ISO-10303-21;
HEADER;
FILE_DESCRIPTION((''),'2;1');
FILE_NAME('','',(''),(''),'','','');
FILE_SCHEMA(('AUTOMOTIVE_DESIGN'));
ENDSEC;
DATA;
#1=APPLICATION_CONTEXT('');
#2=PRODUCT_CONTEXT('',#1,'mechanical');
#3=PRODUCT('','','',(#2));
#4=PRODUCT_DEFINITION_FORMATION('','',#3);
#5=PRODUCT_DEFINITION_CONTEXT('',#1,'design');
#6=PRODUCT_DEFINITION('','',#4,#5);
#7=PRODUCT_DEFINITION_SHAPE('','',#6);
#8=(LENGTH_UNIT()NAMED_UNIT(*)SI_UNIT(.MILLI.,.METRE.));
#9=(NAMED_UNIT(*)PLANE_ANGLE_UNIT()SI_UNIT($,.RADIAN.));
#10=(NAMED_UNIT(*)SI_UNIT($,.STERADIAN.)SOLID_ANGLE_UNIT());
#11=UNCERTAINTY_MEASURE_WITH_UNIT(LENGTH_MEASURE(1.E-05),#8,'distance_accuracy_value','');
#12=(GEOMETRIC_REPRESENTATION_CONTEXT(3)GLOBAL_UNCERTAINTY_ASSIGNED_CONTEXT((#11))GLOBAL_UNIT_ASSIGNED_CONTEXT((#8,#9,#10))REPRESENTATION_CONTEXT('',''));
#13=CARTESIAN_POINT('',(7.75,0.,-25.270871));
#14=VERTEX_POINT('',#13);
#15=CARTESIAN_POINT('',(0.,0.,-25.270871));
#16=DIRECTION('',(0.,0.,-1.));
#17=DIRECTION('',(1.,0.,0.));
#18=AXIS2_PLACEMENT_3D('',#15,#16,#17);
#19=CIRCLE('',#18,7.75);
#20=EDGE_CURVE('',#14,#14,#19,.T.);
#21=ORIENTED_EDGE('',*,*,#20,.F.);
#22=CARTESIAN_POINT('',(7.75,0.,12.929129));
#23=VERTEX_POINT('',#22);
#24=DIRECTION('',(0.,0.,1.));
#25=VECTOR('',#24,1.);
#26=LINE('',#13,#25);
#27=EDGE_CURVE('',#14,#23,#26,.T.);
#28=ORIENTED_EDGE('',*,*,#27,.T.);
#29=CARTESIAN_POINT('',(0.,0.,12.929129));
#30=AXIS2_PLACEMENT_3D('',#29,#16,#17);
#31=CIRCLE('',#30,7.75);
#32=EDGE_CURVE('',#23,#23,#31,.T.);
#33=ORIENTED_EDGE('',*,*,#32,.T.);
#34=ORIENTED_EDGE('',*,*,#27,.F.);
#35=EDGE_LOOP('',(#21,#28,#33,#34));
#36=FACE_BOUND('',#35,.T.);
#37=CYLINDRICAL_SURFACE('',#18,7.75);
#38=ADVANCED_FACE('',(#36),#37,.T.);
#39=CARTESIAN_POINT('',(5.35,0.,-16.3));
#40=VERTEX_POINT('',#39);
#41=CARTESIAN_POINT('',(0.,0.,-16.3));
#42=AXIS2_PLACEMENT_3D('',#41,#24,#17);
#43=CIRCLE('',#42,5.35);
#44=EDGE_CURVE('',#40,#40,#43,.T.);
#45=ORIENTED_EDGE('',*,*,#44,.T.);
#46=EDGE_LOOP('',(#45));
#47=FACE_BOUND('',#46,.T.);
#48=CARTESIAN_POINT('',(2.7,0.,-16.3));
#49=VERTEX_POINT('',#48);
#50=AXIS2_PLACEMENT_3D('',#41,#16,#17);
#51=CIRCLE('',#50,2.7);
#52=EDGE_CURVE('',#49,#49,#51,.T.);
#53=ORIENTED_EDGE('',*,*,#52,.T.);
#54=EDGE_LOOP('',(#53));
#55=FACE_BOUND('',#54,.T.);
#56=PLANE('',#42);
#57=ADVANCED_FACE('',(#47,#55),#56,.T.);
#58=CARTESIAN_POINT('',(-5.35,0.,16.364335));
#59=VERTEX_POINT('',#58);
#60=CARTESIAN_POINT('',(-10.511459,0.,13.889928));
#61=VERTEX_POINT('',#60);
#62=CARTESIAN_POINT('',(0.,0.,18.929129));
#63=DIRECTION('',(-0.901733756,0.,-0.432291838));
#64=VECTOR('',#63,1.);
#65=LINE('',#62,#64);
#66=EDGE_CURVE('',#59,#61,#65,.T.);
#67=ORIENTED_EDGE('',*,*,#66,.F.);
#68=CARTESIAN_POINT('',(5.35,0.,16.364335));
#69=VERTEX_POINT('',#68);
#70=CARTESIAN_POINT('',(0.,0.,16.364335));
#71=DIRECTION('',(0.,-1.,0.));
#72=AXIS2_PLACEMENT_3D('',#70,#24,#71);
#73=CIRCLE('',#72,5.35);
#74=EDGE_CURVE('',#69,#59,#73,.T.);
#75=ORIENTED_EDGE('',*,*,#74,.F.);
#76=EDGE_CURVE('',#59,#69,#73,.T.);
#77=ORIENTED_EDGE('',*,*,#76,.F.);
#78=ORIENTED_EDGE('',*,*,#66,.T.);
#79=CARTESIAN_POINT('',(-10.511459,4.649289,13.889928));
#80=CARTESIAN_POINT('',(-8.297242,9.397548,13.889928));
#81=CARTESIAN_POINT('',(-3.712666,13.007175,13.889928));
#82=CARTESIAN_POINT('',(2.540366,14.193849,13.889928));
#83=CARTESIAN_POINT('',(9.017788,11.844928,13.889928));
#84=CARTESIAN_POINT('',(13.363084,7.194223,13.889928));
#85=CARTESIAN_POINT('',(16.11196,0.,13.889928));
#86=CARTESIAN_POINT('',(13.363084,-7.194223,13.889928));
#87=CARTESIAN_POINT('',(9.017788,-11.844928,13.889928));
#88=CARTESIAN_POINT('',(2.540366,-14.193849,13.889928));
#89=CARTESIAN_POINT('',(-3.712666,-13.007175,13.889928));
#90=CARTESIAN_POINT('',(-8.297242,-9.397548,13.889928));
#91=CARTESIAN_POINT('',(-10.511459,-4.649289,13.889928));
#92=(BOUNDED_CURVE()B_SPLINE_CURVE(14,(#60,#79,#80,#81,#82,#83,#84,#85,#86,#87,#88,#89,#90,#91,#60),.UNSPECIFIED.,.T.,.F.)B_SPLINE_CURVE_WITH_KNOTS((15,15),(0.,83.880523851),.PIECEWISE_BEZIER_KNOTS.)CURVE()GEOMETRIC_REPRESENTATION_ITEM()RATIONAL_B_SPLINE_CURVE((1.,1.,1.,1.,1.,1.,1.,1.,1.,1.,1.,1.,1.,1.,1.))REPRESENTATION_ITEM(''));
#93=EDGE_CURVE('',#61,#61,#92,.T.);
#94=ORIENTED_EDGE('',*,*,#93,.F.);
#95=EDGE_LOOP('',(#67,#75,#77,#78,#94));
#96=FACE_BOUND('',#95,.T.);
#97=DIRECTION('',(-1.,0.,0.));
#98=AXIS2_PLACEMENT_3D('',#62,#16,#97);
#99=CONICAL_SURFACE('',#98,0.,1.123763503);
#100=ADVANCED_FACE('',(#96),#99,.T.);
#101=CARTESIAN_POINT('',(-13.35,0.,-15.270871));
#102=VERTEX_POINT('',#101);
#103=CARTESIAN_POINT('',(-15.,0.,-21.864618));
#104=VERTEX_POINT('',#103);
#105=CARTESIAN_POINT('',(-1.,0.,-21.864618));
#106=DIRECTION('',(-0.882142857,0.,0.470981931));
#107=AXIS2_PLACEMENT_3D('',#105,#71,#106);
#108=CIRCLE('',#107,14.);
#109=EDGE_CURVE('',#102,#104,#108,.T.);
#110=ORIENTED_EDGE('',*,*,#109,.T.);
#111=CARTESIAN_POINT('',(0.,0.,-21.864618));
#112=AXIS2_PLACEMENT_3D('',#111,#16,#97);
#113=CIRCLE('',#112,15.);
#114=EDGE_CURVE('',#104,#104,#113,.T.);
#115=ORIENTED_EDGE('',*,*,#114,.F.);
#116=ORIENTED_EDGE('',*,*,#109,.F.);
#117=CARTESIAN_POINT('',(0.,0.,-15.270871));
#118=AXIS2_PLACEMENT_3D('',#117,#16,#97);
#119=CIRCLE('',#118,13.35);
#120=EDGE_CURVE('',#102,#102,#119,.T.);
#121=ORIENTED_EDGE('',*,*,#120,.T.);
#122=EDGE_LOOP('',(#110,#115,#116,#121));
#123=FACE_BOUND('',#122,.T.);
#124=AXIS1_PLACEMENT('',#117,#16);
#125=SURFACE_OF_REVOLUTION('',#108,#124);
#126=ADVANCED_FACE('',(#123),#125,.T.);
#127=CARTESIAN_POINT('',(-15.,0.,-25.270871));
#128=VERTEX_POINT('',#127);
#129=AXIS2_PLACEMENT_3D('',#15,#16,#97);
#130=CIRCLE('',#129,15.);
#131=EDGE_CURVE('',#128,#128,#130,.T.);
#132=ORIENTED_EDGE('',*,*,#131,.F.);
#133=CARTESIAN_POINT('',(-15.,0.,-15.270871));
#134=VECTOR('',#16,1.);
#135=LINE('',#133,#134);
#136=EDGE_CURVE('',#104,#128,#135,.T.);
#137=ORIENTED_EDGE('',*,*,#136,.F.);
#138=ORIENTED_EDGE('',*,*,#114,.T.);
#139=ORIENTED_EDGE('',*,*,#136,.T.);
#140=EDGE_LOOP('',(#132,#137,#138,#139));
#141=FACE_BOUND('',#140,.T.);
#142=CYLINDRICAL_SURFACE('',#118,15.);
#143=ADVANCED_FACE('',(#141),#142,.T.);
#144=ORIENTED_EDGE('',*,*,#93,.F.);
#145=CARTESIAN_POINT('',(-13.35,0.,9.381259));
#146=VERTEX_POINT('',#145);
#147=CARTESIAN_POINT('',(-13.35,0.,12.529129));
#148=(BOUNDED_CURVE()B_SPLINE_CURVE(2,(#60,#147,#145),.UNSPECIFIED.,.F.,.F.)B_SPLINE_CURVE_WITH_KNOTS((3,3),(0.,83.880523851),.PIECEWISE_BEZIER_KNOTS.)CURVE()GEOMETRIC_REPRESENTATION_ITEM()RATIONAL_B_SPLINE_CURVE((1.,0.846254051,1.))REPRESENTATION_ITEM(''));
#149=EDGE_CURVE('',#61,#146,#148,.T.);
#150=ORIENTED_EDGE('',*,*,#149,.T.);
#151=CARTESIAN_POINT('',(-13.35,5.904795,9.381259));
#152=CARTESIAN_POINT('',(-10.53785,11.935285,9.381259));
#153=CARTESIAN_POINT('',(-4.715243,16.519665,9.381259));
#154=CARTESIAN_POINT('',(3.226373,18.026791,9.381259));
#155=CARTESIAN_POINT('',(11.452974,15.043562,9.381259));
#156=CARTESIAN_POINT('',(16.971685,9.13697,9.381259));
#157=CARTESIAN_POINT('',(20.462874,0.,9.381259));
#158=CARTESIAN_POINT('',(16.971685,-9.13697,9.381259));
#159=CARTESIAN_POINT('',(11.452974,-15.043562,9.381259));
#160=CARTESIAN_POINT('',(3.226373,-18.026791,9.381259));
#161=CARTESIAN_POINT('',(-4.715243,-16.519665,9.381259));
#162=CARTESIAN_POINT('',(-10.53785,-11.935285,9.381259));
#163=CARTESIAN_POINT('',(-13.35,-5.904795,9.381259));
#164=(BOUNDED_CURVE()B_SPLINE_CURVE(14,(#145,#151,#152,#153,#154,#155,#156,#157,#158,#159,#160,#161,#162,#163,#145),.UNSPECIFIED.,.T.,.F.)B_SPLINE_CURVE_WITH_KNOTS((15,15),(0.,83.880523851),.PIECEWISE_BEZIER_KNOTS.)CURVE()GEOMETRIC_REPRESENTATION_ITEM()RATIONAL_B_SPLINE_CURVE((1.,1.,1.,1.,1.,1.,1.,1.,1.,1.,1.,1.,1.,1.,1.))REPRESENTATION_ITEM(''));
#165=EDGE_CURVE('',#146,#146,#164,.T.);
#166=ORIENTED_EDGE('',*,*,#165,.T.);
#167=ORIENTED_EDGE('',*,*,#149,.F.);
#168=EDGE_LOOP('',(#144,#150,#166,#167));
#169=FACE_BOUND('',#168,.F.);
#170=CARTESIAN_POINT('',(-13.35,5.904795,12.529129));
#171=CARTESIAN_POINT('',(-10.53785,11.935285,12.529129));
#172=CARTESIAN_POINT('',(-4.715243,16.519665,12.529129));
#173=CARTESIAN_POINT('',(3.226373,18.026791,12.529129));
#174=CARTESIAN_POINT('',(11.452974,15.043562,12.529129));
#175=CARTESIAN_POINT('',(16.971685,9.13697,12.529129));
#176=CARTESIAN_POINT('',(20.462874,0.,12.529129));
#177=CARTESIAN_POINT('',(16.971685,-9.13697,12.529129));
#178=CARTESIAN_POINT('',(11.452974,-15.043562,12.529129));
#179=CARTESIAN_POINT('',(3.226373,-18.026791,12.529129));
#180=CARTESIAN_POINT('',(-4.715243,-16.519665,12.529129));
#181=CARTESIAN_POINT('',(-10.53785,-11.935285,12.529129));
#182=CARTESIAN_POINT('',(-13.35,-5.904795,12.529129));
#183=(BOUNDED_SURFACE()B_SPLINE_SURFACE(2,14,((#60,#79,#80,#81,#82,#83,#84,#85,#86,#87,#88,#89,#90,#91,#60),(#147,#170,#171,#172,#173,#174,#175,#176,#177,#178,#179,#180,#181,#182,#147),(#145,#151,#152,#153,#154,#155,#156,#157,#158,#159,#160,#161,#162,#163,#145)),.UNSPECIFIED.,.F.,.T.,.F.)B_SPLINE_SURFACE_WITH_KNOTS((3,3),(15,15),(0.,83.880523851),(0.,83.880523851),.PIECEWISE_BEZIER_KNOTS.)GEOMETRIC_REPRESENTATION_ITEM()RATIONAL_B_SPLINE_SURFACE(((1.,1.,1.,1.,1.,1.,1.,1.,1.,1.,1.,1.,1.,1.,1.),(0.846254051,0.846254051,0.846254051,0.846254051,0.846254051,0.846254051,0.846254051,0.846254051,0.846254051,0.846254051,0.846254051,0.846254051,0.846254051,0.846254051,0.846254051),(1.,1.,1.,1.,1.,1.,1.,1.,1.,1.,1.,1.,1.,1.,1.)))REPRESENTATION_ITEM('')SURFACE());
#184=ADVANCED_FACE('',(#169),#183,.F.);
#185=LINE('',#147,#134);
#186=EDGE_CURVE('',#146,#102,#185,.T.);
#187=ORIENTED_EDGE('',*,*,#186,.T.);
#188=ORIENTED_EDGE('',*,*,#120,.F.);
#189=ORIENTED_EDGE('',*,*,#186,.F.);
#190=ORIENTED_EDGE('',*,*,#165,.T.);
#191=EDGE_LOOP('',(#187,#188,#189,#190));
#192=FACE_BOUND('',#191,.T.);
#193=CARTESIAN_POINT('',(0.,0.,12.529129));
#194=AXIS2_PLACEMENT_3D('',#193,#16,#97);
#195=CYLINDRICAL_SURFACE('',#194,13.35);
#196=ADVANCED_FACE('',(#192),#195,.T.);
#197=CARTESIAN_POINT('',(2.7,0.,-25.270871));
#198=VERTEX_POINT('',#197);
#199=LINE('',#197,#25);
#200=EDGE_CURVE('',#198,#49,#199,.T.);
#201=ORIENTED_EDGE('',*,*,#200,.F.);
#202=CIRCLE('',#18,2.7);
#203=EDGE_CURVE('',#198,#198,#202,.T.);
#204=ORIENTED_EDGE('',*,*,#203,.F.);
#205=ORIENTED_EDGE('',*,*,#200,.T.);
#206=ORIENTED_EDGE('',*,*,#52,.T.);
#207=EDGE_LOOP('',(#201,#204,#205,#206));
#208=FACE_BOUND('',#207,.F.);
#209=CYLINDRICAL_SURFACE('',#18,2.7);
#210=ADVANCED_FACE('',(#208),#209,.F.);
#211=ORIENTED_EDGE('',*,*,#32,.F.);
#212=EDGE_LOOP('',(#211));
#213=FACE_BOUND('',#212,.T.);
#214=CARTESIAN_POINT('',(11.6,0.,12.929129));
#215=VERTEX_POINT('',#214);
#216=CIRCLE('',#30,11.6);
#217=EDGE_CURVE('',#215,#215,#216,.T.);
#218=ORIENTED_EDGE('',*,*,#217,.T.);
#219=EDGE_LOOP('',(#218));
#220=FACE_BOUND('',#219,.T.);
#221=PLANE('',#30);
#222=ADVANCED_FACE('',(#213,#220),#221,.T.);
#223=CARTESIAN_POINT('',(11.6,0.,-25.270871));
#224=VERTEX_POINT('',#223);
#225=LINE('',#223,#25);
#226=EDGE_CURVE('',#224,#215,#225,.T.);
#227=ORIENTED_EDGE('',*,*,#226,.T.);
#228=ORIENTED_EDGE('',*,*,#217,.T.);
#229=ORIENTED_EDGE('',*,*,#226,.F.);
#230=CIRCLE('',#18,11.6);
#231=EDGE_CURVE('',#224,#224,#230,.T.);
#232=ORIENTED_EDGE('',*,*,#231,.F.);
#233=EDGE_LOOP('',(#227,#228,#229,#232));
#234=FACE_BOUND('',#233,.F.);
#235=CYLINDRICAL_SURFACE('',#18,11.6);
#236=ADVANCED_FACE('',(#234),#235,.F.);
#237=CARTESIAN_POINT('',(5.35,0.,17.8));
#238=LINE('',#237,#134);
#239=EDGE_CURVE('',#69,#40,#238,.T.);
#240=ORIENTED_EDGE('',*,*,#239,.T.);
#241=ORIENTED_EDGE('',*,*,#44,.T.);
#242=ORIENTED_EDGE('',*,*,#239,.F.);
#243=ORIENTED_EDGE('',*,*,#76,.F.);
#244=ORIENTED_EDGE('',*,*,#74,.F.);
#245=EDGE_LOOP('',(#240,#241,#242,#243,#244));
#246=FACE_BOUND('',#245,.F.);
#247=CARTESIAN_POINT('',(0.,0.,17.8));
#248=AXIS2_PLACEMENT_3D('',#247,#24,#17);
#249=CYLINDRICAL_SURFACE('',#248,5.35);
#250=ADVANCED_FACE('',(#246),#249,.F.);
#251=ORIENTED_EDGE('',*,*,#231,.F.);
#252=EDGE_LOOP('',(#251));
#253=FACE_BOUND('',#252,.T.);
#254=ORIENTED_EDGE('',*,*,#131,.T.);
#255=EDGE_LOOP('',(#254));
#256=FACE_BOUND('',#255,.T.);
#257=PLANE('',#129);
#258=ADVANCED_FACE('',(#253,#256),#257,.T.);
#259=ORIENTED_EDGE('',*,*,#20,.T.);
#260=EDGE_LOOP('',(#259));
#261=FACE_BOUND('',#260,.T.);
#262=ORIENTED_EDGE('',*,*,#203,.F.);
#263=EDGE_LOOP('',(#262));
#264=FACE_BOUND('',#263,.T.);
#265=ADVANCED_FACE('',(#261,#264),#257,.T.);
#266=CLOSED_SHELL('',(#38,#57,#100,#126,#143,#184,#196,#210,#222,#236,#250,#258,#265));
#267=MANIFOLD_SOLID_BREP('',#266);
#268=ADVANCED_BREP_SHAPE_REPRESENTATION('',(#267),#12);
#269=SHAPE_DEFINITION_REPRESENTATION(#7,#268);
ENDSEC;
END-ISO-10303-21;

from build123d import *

# Parameters (mm, degrees)
F2_R     = 2.7
F3_DEPTH = 44.201
F4_R     = 11.6
F4_R_2   = 7.75
F5_DEPTH = 38.2
F6_R     = 5
F8_R     = 5.35
F9_DEPTH = 34.1


# Not quite as in the source:
# - a fillet or chamfer that OpenCascade refuses, or shapes differently, is made with other operations: its cross-section is extruded or revolved along the edge and cut away or added


with BuildPart() as f1:
    # F0 (on Front) → F1 (revolve)
    with BuildSketch(Plane.XZ):
        Polygon((0, -25.2708706191), (0, 18.9291293809), (-13.35, 12.5291293809), (-13.35, -15.2708706191), (-15, -15.2708706191), (-15, -25.2708706191), align=None)
    revolve(axis=Axis((0, 0, -3.1708706191), (0, 0, -1)))

    # F2 (on face) → F3 (cut, through all)
    with BuildSketch(Plane(origin=(0, 0, -25.2708706191), x_dir=(1, 0, 0), z_dir=(0, 0, -1))):
        Circle(F2_R)
    extrude(amount=-F3_DEPTH, mode=Mode.SUBTRACT)

    # F4 (on face) → F5 (cut)
    with BuildSketch(Plane(origin=(0, 0, -25.2708706191), x_dir=(1, 0, 0), z_dir=(0, 0, -1))):
        Circle(F4_R)
        Circle(F4_R_2, mode=Mode.SUBTRACT)
    extrude(amount=-F5_DEPTH, mode=Mode.SUBTRACT)

    # F6
    f6_edges = [f1.edges().sort_by_distance(p)[0] for p in [
        (13.35, 0, 12.529129),
    ]]
    fillet(f6_edges, radius=F6_R)

    # F8 (on offset) → F9 (cut)
    with BuildSketch(Plane.XY.offset(17.8)):
        Circle(F8_R)
    extrude(amount=-F9_DEPTH, mode=Mode.SUBTRACT)

    # F10: fillet of radius 14 on 1 edges, made by hand

    # F10_s1 → F10_t2 (revolve, cut)
    with BuildSketch(Plane.XZ):
        with BuildLine():
            ThreePointArc((-13.35, -15.2708706191), (-14.5812370571, -18.4660885634), (-15, -21.864617657))
            Line((-15, -21.864617657), (-15, -15.2708706191))
            Line((-15, -15.2708706191), (-13.35, -15.2708706191))
        make_face()
    revolve(axis=Axis((0, 0, -15.2708706191), (0, 0, -1)), mode=Mode.SUBTRACT)


solid = f1.part
